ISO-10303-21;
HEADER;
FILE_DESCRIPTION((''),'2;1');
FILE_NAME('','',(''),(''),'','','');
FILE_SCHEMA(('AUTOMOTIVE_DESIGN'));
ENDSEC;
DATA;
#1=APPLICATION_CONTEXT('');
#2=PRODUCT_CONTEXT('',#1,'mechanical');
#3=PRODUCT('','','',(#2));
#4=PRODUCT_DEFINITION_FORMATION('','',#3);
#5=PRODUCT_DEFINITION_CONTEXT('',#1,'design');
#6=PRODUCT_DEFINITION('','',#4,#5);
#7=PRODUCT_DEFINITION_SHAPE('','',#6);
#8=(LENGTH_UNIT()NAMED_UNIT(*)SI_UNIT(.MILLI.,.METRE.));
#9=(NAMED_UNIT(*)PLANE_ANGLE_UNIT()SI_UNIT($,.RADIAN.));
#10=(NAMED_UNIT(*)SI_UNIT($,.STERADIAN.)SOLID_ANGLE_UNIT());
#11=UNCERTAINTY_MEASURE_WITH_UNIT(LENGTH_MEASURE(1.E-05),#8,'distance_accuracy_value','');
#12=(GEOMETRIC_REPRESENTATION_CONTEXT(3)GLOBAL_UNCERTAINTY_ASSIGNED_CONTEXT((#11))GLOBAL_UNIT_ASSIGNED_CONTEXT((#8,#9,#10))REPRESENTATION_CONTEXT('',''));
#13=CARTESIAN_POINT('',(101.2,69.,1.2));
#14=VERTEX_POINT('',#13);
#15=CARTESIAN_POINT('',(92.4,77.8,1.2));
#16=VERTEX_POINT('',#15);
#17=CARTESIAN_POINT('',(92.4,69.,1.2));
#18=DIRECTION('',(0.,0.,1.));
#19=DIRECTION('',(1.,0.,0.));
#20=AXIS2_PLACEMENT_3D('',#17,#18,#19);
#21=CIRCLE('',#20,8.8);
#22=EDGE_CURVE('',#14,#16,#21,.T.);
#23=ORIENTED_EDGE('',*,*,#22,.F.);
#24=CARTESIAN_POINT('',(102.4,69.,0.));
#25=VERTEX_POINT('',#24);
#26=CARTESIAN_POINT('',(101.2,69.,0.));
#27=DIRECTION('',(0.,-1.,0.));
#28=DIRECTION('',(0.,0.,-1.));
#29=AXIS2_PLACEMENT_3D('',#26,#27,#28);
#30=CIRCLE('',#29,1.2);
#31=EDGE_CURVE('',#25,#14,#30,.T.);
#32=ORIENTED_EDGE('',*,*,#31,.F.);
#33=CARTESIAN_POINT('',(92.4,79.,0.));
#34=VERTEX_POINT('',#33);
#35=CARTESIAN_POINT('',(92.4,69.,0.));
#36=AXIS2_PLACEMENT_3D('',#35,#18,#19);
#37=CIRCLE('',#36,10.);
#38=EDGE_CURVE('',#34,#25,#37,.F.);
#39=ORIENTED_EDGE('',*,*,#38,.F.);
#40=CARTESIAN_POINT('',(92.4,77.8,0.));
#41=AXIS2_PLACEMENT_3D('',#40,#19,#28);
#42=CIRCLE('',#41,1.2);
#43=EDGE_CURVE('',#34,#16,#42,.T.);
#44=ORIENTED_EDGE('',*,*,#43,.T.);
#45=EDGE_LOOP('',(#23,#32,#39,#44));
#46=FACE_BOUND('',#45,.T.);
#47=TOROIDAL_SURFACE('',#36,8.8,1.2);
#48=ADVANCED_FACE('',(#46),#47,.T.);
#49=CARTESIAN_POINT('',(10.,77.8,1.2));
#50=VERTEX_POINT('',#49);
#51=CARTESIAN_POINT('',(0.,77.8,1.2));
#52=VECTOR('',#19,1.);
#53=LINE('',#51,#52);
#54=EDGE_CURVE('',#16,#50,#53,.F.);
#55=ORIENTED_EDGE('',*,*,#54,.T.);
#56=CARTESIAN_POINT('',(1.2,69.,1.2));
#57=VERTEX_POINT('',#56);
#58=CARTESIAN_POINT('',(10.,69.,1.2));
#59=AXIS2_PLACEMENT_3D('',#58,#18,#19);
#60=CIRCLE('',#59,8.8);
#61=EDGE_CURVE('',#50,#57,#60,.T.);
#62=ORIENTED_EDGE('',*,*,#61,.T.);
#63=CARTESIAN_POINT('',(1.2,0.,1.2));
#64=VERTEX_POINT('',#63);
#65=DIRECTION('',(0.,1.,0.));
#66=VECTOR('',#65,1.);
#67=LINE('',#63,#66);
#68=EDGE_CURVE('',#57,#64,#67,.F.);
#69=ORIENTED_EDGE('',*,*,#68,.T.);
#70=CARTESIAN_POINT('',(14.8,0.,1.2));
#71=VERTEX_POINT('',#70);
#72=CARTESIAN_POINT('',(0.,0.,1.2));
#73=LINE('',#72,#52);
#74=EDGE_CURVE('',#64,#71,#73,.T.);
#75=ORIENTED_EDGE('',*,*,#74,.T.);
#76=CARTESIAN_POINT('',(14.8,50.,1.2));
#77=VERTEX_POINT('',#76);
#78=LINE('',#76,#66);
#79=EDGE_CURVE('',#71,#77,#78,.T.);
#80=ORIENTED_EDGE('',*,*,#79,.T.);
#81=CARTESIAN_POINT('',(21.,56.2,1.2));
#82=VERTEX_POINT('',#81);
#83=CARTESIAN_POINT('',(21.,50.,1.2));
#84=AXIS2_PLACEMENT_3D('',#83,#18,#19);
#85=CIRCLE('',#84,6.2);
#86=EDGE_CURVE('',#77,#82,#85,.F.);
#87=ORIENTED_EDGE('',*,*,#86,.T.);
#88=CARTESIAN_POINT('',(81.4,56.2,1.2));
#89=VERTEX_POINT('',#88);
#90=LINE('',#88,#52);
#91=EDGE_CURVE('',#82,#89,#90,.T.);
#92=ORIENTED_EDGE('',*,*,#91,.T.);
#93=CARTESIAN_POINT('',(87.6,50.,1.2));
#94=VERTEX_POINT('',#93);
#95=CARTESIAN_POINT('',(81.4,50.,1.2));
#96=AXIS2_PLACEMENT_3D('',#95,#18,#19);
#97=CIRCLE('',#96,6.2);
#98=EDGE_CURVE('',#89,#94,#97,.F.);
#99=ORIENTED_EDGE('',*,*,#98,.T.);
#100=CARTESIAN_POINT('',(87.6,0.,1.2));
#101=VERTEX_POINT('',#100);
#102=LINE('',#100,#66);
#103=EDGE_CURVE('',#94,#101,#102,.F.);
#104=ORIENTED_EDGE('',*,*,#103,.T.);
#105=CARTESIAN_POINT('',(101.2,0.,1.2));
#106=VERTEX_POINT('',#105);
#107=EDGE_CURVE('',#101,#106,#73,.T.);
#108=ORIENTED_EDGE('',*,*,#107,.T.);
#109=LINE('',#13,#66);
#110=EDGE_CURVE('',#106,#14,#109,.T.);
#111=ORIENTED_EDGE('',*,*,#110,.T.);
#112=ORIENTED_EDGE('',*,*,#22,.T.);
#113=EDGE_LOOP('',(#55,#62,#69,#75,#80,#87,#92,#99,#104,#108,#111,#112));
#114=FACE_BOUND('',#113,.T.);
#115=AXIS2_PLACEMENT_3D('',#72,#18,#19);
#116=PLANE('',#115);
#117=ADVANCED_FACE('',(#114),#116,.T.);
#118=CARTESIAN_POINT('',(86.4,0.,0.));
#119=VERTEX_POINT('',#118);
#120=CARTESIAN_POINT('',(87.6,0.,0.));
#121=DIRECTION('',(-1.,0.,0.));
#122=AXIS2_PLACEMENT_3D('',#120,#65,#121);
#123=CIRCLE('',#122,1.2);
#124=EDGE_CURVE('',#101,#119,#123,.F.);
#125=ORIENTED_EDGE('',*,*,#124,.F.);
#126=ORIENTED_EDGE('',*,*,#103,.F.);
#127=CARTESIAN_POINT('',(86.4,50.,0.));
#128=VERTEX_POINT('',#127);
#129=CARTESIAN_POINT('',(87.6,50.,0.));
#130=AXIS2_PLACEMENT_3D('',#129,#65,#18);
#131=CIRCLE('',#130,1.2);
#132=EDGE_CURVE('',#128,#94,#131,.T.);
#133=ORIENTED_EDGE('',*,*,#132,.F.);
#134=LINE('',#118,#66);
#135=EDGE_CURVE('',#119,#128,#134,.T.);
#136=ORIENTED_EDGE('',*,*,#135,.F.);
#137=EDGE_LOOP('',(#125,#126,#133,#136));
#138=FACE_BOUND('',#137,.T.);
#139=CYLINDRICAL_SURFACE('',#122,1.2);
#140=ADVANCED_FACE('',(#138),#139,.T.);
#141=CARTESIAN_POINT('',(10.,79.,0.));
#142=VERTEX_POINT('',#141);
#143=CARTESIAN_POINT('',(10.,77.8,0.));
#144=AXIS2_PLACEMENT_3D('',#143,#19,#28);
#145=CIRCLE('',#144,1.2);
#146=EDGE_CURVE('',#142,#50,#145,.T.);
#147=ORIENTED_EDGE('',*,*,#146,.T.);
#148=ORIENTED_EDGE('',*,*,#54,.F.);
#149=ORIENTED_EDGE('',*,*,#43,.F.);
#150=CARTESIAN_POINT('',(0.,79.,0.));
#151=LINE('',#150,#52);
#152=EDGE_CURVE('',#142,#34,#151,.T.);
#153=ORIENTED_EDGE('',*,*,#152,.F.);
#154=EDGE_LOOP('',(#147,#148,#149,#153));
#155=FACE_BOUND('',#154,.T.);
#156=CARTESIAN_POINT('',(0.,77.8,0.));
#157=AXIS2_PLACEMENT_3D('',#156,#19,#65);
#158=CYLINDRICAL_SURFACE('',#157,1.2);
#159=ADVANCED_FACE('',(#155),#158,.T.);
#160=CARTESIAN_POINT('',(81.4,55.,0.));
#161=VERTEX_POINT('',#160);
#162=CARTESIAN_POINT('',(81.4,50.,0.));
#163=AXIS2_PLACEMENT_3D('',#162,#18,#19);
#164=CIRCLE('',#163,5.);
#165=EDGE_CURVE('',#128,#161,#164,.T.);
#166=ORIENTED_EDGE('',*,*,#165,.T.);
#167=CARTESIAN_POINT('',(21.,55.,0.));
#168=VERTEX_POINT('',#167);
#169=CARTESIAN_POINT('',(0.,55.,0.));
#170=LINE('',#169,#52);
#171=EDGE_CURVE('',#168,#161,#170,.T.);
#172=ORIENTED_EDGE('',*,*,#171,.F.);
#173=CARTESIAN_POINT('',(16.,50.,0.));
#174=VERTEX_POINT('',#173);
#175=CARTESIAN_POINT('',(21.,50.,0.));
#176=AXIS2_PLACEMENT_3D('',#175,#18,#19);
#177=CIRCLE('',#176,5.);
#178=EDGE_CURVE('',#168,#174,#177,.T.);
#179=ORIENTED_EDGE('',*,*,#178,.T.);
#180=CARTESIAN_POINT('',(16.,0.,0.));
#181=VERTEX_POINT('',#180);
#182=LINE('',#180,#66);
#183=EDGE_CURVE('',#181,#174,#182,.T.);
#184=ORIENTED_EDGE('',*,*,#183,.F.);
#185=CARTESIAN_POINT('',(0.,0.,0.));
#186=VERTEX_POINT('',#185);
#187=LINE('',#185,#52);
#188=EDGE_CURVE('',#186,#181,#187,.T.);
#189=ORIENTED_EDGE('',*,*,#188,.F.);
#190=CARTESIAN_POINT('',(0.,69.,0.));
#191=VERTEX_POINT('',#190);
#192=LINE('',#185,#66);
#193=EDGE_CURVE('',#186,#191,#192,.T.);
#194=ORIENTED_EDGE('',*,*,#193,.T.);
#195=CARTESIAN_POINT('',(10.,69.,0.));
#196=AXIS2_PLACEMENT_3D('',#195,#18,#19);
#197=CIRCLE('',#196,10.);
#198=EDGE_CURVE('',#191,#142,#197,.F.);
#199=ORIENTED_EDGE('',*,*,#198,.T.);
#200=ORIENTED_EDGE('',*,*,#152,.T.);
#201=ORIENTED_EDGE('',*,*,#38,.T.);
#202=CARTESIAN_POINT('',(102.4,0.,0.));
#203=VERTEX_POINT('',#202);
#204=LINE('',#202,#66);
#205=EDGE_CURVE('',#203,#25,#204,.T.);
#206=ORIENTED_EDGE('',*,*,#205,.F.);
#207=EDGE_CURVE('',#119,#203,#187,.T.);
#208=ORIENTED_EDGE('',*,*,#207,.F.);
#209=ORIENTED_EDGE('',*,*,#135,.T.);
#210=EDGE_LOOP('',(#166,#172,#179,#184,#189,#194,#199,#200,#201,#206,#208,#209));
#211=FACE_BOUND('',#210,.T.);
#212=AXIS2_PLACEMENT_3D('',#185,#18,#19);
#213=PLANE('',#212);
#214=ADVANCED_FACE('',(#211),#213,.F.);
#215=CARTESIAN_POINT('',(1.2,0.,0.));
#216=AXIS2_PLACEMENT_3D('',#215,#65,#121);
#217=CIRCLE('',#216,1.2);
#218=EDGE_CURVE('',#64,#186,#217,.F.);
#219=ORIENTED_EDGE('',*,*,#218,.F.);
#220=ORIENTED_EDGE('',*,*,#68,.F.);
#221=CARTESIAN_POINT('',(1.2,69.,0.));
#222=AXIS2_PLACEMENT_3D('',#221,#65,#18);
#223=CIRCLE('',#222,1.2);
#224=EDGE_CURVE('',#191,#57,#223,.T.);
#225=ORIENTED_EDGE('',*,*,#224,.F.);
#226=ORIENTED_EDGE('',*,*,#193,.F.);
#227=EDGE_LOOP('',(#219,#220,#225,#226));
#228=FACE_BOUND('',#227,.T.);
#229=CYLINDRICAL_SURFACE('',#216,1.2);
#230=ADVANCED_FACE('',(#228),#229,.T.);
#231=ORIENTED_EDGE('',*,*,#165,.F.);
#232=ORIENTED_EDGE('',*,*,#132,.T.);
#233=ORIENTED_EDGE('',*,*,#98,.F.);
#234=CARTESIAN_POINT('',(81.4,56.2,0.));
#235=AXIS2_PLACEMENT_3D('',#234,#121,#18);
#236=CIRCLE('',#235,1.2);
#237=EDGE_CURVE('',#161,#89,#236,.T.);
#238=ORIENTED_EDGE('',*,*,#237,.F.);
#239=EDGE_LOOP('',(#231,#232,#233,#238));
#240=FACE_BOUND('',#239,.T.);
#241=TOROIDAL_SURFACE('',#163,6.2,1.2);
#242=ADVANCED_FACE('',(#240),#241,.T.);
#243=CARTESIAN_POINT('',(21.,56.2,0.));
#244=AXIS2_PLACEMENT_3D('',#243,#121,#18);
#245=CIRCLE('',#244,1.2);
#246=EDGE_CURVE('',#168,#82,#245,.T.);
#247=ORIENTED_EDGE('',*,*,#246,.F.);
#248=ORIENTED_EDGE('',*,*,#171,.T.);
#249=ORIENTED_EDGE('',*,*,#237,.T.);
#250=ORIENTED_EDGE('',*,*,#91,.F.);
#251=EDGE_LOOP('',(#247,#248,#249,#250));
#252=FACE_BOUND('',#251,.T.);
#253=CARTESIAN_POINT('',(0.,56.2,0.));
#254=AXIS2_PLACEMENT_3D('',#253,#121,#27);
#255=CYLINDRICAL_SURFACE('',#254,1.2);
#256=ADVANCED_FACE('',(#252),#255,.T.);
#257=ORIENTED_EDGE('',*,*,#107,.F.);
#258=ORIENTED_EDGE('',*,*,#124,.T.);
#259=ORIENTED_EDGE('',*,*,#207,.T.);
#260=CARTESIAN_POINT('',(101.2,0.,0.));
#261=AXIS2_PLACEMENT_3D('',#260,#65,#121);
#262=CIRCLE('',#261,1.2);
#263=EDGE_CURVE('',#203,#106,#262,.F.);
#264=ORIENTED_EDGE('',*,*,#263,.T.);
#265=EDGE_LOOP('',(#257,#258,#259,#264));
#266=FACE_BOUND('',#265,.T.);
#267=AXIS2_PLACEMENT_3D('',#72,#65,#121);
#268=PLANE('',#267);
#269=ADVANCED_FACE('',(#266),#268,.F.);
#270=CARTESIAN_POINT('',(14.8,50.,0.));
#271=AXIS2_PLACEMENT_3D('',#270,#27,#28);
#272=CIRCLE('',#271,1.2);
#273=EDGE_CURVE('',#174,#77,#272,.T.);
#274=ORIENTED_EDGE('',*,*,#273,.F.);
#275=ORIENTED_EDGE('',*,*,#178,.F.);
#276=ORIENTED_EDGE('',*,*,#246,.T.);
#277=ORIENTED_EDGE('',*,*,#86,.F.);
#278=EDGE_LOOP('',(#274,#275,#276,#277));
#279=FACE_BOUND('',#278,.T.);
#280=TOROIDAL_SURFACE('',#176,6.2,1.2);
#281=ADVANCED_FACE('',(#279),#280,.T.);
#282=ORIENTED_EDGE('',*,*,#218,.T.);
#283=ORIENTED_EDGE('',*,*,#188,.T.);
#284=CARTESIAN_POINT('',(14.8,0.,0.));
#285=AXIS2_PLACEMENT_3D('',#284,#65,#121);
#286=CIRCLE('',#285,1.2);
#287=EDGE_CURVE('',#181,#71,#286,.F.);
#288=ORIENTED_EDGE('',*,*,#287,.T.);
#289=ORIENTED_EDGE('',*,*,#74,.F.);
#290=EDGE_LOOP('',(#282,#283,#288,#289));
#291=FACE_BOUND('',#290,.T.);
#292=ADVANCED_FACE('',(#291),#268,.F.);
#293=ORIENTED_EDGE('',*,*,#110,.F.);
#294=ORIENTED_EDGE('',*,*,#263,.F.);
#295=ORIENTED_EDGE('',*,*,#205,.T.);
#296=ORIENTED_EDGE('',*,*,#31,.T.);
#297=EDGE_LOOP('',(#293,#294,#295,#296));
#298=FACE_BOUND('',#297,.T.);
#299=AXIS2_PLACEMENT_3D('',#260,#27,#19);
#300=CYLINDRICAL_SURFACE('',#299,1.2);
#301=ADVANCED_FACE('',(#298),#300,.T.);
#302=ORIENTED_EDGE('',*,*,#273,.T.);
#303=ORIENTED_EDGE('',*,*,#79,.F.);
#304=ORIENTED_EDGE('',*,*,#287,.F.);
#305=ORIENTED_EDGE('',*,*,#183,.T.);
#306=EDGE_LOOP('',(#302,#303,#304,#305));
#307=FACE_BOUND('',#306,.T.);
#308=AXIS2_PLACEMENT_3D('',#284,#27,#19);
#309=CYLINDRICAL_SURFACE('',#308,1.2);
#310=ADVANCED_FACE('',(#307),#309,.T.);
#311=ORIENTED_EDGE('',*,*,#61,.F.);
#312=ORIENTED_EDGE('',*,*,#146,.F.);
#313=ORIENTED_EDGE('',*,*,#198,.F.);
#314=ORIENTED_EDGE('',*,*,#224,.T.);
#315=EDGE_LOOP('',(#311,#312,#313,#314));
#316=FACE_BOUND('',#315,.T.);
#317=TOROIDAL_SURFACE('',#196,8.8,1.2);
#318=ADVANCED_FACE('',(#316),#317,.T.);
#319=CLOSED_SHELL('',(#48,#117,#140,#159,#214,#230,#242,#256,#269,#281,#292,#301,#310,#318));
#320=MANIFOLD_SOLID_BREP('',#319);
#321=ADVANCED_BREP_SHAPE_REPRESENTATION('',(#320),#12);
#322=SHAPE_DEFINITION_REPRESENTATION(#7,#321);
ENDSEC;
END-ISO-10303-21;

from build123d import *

# Parameters (mm, degrees)
AUFSATZ_LINEAR_AUSTRAGEN1_DEPTH = 1.2
VERRUNDUNG1_R                   = 10
VERRUNDUNG2_R                   = 5
VERRUNDUNG3_R                   = 1.2
VERRUNDUNG4_R                   = 1.2


with BuildPart() as part:
    # Skizze1 → Aufsatz-Linear austragen1 (new body)
    with BuildSketch(Plane.XY):
        Polygon((0, 79), (0, 0), (16, 0), (16, 55), (86.4, 55), (86.4, 0), (102.4, 0), (102.4, 79), align=None)
    extrude(amount=AUFSATZ_LINEAR_AUSTRAGEN1_DEPTH)

    # Verrundung1
    verrundung1_edges = [part.edges().sort_by_distance(p)[0] for p in [
        (0, 79, 0.6),
        (102.4, 79, 0.6),
    ]]
    fillet(verrundung1_edges, radius=VERRUNDUNG1_R)

    # Verrundung2
    verrundung2_edges = [part.edges().sort_by_distance(p)[0] for p in [
        (86.4, 55, 0.6),
        (16, 55, 0.6),
    ]]
    fillet(verrundung2_edges, radius=VERRUNDUNG2_R)

    # Verrundung3
    verrundung3_edges = [part.edges().sort_by_distance(p)[0] for p in [
        (102.4, 34.5, 1.2),
        (99.471067812, 76.071067812, 1.2),
        (51.2, 79, 1.2),
        (2.928932188, 76.071067812, 1.2),
        (0, 34.5, 1.2),
    ]]
    fillet(verrundung3_edges, radius=VERRUNDUNG3_R - 0.0001)  # a hair under: the kernel refuses the full size

    # Verrundung4
    verrundung4_edges = [part.edges().sort_by_distance(p)[0] for p in [
        (16, 25, 1.2),
        (17.464466094, 53.535533906, 1.2),
        (86.4, 25, 1.2),
        (84.935533906, 53.535533906, 1.2),
        (51.2, 55, 1.2),
    ]]
    fillet(verrundung4_edges, radius=VERRUNDUNG4_R - 0.0001)  # a hair under: the kernel refuses the full size


solid = part.part
